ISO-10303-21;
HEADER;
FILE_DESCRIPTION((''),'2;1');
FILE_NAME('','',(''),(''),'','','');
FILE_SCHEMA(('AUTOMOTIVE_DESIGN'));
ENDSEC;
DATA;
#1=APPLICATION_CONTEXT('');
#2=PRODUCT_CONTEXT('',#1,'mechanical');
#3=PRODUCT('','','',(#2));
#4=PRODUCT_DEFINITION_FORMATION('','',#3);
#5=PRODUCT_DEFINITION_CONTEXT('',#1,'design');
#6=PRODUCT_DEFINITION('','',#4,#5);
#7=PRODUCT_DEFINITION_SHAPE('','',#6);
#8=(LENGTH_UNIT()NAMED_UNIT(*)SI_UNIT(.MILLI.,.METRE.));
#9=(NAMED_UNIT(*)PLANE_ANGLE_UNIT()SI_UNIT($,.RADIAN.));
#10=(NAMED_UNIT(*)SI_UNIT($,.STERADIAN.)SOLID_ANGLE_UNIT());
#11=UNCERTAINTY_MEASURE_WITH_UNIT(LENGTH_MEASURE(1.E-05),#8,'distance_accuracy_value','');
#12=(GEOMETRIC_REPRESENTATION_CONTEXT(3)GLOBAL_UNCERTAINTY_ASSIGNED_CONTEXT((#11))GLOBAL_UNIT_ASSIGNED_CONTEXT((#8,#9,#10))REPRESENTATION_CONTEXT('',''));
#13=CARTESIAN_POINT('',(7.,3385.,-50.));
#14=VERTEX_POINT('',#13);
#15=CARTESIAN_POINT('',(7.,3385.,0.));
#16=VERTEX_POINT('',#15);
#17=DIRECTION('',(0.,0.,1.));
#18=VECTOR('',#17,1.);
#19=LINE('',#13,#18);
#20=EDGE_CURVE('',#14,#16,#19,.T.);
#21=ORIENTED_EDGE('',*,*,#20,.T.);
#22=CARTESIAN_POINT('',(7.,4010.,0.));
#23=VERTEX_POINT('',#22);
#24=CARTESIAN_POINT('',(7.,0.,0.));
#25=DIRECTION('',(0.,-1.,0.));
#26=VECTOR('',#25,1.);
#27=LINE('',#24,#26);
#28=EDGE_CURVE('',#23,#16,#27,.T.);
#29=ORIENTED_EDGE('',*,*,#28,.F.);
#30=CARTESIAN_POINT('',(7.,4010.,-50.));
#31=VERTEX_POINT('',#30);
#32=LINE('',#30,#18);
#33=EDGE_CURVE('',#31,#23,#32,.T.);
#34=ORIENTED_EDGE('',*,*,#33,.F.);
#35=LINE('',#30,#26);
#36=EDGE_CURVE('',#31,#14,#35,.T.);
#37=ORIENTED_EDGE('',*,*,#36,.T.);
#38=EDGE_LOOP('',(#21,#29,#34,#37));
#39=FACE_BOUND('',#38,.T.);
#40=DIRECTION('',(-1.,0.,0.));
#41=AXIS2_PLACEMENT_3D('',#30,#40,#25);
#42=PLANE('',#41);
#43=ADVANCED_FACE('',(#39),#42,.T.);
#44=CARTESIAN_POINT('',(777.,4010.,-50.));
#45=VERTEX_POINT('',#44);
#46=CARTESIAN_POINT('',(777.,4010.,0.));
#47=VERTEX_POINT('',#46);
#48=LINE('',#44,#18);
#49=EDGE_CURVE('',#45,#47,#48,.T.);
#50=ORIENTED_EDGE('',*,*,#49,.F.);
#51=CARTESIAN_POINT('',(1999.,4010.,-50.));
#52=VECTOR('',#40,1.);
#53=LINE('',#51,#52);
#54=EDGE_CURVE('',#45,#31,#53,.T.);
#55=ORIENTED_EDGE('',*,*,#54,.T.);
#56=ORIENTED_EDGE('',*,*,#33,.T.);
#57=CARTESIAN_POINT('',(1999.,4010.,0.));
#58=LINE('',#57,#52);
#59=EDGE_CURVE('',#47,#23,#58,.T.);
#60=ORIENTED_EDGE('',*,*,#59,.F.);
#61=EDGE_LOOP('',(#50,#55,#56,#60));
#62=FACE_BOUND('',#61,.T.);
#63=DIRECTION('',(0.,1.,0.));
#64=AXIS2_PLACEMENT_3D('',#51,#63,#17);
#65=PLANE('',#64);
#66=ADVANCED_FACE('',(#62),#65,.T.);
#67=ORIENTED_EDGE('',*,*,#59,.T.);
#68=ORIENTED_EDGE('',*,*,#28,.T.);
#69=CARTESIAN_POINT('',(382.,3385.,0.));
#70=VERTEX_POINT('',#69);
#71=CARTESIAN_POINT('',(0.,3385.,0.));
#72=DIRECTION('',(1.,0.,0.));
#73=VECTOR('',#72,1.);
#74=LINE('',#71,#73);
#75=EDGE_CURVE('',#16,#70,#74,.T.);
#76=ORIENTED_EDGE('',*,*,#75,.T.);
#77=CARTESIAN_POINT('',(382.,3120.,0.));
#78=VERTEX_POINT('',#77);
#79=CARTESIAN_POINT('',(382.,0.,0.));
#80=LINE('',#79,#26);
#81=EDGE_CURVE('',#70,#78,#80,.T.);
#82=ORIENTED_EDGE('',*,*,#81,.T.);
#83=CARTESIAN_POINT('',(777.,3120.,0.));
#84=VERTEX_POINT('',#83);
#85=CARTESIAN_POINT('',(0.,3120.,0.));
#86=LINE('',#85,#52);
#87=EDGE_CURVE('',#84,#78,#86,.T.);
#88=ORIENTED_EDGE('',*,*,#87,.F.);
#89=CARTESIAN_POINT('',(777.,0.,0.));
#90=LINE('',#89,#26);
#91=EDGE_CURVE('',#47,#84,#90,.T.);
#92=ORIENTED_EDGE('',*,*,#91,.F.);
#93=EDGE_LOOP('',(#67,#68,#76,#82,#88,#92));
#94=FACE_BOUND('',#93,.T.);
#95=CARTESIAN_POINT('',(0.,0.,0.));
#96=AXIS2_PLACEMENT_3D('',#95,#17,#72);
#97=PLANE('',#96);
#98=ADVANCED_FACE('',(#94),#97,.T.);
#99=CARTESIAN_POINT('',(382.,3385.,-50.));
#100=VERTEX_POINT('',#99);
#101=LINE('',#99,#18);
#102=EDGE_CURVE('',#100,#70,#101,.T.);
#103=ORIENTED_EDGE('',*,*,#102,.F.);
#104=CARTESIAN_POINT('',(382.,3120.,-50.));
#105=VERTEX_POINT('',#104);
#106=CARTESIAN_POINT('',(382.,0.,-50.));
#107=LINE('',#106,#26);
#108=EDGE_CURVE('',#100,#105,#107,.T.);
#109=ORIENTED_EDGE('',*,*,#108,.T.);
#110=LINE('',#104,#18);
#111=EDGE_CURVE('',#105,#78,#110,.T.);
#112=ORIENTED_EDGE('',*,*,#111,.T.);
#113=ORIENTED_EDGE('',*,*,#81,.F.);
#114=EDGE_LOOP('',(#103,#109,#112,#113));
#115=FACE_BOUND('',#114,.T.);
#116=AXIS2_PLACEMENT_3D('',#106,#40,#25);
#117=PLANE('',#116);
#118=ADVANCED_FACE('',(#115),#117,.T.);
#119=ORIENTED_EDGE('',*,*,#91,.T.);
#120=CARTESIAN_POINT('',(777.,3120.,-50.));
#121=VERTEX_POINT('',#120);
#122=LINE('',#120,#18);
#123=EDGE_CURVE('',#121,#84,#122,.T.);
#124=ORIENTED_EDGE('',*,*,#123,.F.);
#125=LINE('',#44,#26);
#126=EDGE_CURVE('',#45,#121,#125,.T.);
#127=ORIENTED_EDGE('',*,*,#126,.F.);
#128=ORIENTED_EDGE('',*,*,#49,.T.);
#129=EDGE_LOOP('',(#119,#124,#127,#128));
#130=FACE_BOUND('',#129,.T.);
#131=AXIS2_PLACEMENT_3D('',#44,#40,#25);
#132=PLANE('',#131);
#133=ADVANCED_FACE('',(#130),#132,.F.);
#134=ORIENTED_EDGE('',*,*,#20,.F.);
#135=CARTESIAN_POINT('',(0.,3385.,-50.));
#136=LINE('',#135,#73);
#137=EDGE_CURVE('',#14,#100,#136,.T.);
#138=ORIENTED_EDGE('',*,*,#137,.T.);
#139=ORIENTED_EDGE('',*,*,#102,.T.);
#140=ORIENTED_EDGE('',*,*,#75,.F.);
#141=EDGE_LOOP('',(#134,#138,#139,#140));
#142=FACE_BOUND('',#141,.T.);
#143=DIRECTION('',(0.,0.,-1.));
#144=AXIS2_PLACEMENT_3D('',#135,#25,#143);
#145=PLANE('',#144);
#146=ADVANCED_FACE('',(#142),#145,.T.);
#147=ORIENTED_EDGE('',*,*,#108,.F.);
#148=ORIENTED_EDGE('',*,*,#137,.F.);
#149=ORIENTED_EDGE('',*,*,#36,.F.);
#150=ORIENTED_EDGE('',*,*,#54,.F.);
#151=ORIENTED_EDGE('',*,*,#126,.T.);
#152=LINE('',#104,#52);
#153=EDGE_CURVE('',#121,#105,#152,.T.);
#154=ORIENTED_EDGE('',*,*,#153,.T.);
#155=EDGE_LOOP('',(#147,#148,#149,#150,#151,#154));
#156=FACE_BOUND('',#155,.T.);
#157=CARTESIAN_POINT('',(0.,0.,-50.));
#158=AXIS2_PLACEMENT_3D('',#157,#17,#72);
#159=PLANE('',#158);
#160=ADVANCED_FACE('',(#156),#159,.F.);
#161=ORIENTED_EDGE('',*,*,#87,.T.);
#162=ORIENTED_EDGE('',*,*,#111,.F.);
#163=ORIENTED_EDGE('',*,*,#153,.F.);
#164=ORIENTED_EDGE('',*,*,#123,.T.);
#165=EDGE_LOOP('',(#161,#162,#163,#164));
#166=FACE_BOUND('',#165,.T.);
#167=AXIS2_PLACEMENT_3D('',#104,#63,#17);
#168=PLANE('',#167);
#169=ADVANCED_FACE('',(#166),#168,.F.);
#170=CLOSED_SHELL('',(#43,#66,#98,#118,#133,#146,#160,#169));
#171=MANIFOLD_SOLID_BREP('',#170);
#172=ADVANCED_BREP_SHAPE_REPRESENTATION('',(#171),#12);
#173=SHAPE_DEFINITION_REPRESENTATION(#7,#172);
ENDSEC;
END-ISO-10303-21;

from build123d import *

# Parameters (mm, degrees)
TABAN_FLAN_1_DEPTH         = 50
KES_EKSTR_ZYON1_DEPTH      = 4481.915196698
KES_EKSTR_ZYON1_DEPTH_BACK = 4481.915196698
IZIM2_W                    = 942
IZIM2_H                    = 710
IZIM3_W                    = 11
IZIM3_H                    = 3300
SEKME1_DEPTH               = 50
KES_EKSTR_ZYON2_DEPTH      = 4486.833255929
KES_EKSTR_ZYON2_DEPTH_BACK = 4486.833255929
IZIM4_W                    = 1520
IZIM4_H                    = 310
KES_EKSTR_ZYON3_DEPTH      = 4486.833255929
KES_EKSTR_ZYON3_DEPTH_BACK = 4486.833255929
IZIM6_W                    = 7
IZIM6_H                    = 2435
KES_EKSTR_ZYON4_DEPTH      = 4337.484751501
KES_EKSTR_ZYON4_DEPTH_BACK = 4337.484751501
IZIM7_W                    = 360
IZIM7_H                    = 1550
KES_EKSTR_ZYON5_DEPTH      = 4213.683230436
KES_EKSTR_ZYON5_DEPTH_BACK = 4213.683230436
IZIM8_W                    = 3
IZIM8_H                    = 1550
IZIM8_W_2                  = 58
IZIM8_H_2                  = 885
IZIM9_W                    = 905
IZIM9_H                    = 5
SEKME2_DEPTH               = 50
KES_EKSTR_ZYON6_DEPTH      = 4212.765544282
KES_EKSTR_ZYON6_DEPTH_BACK = 4212.765544282
IZIM10_W                   = 101
IZIM10_H                   = 1555
KES_EKSTR_ZYON7_DEPTH      = 4183.008608313
KES_EKSTR_ZYON7_DEPTH_BACK = 4183.008608313
IZIM11_W                   = 409
IZIM11_H                   = 1555
KES_EKSTR_ZYON8_DEPTH      = 4085.890329005
KES_EKSTR_ZYON8_DEPTH_BACK = 4085.890329005
IZIM13_W                   = 395
IZIM13_H                   = 665


# Sheet-metal steps are written as plain solids
with BuildPart() as part:
    # Çizim1 → Taban-Flanş1 (new body)
    with BuildSketch(Plane.XY):
        Polygon((0, 0), (1427, 0), (1427, 710), (1999, 710), (1999, 4010), (0, 4010), align=None)
    extrude(amount=-TABAN_FLAN_1_DEPTH)

    # Çizim2 → Kes-Ekstrüzyon1 (cut, two sides: drawn at the far end of the back side and taken through both)
    with BuildSketch(Plane.XY.offset(-KES_EKSTR_ZYON1_DEPTH_BACK)):
        with Locations((956, 355)):
            Rectangle(IZIM2_W, IZIM2_H)
    extrude(amount=KES_EKSTR_ZYON1_DEPTH + KES_EKSTR_ZYON1_DEPTH_BACK, mode=Mode.SUBTRACT)

    # Çizim3 → Sekme1 (add)
    with BuildSketch(Plane.XY):
        with Locations((2004.5, 2360)):
            Rectangle(IZIM3_W, IZIM3_H)
    extrude(amount=-SEKME1_DEPTH)

    # Çizim4 → Kes-Ekstrüzyon2 (cut, two sides: drawn at the far end of the back side and taken through both)
    with BuildSketch(Plane.XY.offset(-KES_EKSTR_ZYON2_DEPTH_BACK)):
        with Locations((1250, 865)):
            Rectangle(IZIM4_W, IZIM4_H)
    extrude(amount=KES_EKSTR_ZYON2_DEPTH + KES_EKSTR_ZYON2_DEPTH_BACK, mode=Mode.SUBTRACT)

    # Çizim6 → Kes-Ekstrüzyon3 (cut, two sides: drawn at the far end of the back side and taken through both)
    with BuildSketch(Plane.XY.offset(-KES_EKSTR_ZYON3_DEPTH_BACK)):
        Polygon((440, 2460), (440, 1575), (440, 1020), (490, 1020), (2010, 1020), (2010, 4010), (1650, 4010), (1650, 2460), align=None)
        Polygon((7, 1575), (0, 1575), (0, 0), (485, 0), (485, 710), (490, 710), (490, 1020), (440, 1020), (440, 1575), align=None)
        with Locations((3.5, 2792.5)):
            Rectangle(IZIM6_W, IZIM6_H)
    extrude(amount=KES_EKSTR_ZYON3_DEPTH + KES_EKSTR_ZYON3_DEPTH_BACK, mode=Mode.SUBTRACT)

    # Çizim7 → Kes-Ekstrüzyon4 (cut, two sides: drawn at the far end of the back side and taken through both)
    with BuildSketch(Plane.XY.offset(-KES_EKSTR_ZYON4_DEPTH_BACK)):
        with Locations((1470, 3235)):
            Rectangle(IZIM7_W, IZIM7_H)
    extrude(amount=KES_EKSTR_ZYON4_DEPTH + KES_EKSTR_ZYON4_DEPTH_BACK, mode=Mode.SUBTRACT)

    # Çizim8 → Kes-Ekstrüzyon5 (cut, two sides: drawn at the far end of the back side and taken through both)
    with BuildSketch(Plane.XY.offset(-KES_EKSTR_ZYON5_DEPTH_BACK)):
        Polygon((382, 3385), (7, 3385), (7, 1575), (382, 1575), (382, 2460), align=None)
        with Locations((1288.5, 3235)):
            Rectangle(IZIM8_W, IZIM8_H)
        with Locations((411, 2017.5)):
            Rectangle(IZIM8_W_2, IZIM8_H_2)
    extrude(amount=KES_EKSTR_ZYON5_DEPTH + KES_EKSTR_ZYON5_DEPTH_BACK, mode=Mode.SUBTRACT)

    # Çizim9 → Sekme2 (add)
    with BuildSketch(Plane.XY):
        with Locations((834.5, 2457.5)):
            Rectangle(IZIM9_W, IZIM9_H)
    extrude(amount=-SEKME2_DEPTH)

    # Çizim10 → Kes-Ekstrüzyon6 (cut, two sides: drawn at the far end of the back side and taken through both)
    with BuildSketch(Plane.XY.offset(-KES_EKSTR_ZYON6_DEPTH_BACK)):
        with Locations((1236.5, 3232.5)):
            Rectangle(IZIM10_W, IZIM10_H)
    extrude(amount=KES_EKSTR_ZYON6_DEPTH + KES_EKSTR_ZYON6_DEPTH_BACK, mode=Mode.SUBTRACT)

    # Çizim11 → Kes-Ekstrüzyon7 (cut, two sides: drawn at the far end of the back side and taken through both)
    with BuildSketch(Plane.XY.offset(-KES_EKSTR_ZYON7_DEPTH_BACK)):
        with Locations((981.5, 3232.5)):
            Rectangle(IZIM11_W, IZIM11_H)
    extrude(amount=KES_EKSTR_ZYON7_DEPTH + KES_EKSTR_ZYON7_DEPTH_BACK, mode=Mode.SUBTRACT)

    # Çizim13 → Kes-Ekstrüzyon8 (cut, two sides: drawn at the far end of the back side and taken through both)
    with BuildSketch(Plane.XY.offset(-KES_EKSTR_ZYON8_DEPTH_BACK)):
        with Locations((579.5, 2787.5)):
            Rectangle(IZIM13_W, IZIM13_H)
    extrude(amount=KES_EKSTR_ZYON8_DEPTH + KES_EKSTR_ZYON8_DEPTH_BACK, mode=Mode.SUBTRACT)


solid = part.part
